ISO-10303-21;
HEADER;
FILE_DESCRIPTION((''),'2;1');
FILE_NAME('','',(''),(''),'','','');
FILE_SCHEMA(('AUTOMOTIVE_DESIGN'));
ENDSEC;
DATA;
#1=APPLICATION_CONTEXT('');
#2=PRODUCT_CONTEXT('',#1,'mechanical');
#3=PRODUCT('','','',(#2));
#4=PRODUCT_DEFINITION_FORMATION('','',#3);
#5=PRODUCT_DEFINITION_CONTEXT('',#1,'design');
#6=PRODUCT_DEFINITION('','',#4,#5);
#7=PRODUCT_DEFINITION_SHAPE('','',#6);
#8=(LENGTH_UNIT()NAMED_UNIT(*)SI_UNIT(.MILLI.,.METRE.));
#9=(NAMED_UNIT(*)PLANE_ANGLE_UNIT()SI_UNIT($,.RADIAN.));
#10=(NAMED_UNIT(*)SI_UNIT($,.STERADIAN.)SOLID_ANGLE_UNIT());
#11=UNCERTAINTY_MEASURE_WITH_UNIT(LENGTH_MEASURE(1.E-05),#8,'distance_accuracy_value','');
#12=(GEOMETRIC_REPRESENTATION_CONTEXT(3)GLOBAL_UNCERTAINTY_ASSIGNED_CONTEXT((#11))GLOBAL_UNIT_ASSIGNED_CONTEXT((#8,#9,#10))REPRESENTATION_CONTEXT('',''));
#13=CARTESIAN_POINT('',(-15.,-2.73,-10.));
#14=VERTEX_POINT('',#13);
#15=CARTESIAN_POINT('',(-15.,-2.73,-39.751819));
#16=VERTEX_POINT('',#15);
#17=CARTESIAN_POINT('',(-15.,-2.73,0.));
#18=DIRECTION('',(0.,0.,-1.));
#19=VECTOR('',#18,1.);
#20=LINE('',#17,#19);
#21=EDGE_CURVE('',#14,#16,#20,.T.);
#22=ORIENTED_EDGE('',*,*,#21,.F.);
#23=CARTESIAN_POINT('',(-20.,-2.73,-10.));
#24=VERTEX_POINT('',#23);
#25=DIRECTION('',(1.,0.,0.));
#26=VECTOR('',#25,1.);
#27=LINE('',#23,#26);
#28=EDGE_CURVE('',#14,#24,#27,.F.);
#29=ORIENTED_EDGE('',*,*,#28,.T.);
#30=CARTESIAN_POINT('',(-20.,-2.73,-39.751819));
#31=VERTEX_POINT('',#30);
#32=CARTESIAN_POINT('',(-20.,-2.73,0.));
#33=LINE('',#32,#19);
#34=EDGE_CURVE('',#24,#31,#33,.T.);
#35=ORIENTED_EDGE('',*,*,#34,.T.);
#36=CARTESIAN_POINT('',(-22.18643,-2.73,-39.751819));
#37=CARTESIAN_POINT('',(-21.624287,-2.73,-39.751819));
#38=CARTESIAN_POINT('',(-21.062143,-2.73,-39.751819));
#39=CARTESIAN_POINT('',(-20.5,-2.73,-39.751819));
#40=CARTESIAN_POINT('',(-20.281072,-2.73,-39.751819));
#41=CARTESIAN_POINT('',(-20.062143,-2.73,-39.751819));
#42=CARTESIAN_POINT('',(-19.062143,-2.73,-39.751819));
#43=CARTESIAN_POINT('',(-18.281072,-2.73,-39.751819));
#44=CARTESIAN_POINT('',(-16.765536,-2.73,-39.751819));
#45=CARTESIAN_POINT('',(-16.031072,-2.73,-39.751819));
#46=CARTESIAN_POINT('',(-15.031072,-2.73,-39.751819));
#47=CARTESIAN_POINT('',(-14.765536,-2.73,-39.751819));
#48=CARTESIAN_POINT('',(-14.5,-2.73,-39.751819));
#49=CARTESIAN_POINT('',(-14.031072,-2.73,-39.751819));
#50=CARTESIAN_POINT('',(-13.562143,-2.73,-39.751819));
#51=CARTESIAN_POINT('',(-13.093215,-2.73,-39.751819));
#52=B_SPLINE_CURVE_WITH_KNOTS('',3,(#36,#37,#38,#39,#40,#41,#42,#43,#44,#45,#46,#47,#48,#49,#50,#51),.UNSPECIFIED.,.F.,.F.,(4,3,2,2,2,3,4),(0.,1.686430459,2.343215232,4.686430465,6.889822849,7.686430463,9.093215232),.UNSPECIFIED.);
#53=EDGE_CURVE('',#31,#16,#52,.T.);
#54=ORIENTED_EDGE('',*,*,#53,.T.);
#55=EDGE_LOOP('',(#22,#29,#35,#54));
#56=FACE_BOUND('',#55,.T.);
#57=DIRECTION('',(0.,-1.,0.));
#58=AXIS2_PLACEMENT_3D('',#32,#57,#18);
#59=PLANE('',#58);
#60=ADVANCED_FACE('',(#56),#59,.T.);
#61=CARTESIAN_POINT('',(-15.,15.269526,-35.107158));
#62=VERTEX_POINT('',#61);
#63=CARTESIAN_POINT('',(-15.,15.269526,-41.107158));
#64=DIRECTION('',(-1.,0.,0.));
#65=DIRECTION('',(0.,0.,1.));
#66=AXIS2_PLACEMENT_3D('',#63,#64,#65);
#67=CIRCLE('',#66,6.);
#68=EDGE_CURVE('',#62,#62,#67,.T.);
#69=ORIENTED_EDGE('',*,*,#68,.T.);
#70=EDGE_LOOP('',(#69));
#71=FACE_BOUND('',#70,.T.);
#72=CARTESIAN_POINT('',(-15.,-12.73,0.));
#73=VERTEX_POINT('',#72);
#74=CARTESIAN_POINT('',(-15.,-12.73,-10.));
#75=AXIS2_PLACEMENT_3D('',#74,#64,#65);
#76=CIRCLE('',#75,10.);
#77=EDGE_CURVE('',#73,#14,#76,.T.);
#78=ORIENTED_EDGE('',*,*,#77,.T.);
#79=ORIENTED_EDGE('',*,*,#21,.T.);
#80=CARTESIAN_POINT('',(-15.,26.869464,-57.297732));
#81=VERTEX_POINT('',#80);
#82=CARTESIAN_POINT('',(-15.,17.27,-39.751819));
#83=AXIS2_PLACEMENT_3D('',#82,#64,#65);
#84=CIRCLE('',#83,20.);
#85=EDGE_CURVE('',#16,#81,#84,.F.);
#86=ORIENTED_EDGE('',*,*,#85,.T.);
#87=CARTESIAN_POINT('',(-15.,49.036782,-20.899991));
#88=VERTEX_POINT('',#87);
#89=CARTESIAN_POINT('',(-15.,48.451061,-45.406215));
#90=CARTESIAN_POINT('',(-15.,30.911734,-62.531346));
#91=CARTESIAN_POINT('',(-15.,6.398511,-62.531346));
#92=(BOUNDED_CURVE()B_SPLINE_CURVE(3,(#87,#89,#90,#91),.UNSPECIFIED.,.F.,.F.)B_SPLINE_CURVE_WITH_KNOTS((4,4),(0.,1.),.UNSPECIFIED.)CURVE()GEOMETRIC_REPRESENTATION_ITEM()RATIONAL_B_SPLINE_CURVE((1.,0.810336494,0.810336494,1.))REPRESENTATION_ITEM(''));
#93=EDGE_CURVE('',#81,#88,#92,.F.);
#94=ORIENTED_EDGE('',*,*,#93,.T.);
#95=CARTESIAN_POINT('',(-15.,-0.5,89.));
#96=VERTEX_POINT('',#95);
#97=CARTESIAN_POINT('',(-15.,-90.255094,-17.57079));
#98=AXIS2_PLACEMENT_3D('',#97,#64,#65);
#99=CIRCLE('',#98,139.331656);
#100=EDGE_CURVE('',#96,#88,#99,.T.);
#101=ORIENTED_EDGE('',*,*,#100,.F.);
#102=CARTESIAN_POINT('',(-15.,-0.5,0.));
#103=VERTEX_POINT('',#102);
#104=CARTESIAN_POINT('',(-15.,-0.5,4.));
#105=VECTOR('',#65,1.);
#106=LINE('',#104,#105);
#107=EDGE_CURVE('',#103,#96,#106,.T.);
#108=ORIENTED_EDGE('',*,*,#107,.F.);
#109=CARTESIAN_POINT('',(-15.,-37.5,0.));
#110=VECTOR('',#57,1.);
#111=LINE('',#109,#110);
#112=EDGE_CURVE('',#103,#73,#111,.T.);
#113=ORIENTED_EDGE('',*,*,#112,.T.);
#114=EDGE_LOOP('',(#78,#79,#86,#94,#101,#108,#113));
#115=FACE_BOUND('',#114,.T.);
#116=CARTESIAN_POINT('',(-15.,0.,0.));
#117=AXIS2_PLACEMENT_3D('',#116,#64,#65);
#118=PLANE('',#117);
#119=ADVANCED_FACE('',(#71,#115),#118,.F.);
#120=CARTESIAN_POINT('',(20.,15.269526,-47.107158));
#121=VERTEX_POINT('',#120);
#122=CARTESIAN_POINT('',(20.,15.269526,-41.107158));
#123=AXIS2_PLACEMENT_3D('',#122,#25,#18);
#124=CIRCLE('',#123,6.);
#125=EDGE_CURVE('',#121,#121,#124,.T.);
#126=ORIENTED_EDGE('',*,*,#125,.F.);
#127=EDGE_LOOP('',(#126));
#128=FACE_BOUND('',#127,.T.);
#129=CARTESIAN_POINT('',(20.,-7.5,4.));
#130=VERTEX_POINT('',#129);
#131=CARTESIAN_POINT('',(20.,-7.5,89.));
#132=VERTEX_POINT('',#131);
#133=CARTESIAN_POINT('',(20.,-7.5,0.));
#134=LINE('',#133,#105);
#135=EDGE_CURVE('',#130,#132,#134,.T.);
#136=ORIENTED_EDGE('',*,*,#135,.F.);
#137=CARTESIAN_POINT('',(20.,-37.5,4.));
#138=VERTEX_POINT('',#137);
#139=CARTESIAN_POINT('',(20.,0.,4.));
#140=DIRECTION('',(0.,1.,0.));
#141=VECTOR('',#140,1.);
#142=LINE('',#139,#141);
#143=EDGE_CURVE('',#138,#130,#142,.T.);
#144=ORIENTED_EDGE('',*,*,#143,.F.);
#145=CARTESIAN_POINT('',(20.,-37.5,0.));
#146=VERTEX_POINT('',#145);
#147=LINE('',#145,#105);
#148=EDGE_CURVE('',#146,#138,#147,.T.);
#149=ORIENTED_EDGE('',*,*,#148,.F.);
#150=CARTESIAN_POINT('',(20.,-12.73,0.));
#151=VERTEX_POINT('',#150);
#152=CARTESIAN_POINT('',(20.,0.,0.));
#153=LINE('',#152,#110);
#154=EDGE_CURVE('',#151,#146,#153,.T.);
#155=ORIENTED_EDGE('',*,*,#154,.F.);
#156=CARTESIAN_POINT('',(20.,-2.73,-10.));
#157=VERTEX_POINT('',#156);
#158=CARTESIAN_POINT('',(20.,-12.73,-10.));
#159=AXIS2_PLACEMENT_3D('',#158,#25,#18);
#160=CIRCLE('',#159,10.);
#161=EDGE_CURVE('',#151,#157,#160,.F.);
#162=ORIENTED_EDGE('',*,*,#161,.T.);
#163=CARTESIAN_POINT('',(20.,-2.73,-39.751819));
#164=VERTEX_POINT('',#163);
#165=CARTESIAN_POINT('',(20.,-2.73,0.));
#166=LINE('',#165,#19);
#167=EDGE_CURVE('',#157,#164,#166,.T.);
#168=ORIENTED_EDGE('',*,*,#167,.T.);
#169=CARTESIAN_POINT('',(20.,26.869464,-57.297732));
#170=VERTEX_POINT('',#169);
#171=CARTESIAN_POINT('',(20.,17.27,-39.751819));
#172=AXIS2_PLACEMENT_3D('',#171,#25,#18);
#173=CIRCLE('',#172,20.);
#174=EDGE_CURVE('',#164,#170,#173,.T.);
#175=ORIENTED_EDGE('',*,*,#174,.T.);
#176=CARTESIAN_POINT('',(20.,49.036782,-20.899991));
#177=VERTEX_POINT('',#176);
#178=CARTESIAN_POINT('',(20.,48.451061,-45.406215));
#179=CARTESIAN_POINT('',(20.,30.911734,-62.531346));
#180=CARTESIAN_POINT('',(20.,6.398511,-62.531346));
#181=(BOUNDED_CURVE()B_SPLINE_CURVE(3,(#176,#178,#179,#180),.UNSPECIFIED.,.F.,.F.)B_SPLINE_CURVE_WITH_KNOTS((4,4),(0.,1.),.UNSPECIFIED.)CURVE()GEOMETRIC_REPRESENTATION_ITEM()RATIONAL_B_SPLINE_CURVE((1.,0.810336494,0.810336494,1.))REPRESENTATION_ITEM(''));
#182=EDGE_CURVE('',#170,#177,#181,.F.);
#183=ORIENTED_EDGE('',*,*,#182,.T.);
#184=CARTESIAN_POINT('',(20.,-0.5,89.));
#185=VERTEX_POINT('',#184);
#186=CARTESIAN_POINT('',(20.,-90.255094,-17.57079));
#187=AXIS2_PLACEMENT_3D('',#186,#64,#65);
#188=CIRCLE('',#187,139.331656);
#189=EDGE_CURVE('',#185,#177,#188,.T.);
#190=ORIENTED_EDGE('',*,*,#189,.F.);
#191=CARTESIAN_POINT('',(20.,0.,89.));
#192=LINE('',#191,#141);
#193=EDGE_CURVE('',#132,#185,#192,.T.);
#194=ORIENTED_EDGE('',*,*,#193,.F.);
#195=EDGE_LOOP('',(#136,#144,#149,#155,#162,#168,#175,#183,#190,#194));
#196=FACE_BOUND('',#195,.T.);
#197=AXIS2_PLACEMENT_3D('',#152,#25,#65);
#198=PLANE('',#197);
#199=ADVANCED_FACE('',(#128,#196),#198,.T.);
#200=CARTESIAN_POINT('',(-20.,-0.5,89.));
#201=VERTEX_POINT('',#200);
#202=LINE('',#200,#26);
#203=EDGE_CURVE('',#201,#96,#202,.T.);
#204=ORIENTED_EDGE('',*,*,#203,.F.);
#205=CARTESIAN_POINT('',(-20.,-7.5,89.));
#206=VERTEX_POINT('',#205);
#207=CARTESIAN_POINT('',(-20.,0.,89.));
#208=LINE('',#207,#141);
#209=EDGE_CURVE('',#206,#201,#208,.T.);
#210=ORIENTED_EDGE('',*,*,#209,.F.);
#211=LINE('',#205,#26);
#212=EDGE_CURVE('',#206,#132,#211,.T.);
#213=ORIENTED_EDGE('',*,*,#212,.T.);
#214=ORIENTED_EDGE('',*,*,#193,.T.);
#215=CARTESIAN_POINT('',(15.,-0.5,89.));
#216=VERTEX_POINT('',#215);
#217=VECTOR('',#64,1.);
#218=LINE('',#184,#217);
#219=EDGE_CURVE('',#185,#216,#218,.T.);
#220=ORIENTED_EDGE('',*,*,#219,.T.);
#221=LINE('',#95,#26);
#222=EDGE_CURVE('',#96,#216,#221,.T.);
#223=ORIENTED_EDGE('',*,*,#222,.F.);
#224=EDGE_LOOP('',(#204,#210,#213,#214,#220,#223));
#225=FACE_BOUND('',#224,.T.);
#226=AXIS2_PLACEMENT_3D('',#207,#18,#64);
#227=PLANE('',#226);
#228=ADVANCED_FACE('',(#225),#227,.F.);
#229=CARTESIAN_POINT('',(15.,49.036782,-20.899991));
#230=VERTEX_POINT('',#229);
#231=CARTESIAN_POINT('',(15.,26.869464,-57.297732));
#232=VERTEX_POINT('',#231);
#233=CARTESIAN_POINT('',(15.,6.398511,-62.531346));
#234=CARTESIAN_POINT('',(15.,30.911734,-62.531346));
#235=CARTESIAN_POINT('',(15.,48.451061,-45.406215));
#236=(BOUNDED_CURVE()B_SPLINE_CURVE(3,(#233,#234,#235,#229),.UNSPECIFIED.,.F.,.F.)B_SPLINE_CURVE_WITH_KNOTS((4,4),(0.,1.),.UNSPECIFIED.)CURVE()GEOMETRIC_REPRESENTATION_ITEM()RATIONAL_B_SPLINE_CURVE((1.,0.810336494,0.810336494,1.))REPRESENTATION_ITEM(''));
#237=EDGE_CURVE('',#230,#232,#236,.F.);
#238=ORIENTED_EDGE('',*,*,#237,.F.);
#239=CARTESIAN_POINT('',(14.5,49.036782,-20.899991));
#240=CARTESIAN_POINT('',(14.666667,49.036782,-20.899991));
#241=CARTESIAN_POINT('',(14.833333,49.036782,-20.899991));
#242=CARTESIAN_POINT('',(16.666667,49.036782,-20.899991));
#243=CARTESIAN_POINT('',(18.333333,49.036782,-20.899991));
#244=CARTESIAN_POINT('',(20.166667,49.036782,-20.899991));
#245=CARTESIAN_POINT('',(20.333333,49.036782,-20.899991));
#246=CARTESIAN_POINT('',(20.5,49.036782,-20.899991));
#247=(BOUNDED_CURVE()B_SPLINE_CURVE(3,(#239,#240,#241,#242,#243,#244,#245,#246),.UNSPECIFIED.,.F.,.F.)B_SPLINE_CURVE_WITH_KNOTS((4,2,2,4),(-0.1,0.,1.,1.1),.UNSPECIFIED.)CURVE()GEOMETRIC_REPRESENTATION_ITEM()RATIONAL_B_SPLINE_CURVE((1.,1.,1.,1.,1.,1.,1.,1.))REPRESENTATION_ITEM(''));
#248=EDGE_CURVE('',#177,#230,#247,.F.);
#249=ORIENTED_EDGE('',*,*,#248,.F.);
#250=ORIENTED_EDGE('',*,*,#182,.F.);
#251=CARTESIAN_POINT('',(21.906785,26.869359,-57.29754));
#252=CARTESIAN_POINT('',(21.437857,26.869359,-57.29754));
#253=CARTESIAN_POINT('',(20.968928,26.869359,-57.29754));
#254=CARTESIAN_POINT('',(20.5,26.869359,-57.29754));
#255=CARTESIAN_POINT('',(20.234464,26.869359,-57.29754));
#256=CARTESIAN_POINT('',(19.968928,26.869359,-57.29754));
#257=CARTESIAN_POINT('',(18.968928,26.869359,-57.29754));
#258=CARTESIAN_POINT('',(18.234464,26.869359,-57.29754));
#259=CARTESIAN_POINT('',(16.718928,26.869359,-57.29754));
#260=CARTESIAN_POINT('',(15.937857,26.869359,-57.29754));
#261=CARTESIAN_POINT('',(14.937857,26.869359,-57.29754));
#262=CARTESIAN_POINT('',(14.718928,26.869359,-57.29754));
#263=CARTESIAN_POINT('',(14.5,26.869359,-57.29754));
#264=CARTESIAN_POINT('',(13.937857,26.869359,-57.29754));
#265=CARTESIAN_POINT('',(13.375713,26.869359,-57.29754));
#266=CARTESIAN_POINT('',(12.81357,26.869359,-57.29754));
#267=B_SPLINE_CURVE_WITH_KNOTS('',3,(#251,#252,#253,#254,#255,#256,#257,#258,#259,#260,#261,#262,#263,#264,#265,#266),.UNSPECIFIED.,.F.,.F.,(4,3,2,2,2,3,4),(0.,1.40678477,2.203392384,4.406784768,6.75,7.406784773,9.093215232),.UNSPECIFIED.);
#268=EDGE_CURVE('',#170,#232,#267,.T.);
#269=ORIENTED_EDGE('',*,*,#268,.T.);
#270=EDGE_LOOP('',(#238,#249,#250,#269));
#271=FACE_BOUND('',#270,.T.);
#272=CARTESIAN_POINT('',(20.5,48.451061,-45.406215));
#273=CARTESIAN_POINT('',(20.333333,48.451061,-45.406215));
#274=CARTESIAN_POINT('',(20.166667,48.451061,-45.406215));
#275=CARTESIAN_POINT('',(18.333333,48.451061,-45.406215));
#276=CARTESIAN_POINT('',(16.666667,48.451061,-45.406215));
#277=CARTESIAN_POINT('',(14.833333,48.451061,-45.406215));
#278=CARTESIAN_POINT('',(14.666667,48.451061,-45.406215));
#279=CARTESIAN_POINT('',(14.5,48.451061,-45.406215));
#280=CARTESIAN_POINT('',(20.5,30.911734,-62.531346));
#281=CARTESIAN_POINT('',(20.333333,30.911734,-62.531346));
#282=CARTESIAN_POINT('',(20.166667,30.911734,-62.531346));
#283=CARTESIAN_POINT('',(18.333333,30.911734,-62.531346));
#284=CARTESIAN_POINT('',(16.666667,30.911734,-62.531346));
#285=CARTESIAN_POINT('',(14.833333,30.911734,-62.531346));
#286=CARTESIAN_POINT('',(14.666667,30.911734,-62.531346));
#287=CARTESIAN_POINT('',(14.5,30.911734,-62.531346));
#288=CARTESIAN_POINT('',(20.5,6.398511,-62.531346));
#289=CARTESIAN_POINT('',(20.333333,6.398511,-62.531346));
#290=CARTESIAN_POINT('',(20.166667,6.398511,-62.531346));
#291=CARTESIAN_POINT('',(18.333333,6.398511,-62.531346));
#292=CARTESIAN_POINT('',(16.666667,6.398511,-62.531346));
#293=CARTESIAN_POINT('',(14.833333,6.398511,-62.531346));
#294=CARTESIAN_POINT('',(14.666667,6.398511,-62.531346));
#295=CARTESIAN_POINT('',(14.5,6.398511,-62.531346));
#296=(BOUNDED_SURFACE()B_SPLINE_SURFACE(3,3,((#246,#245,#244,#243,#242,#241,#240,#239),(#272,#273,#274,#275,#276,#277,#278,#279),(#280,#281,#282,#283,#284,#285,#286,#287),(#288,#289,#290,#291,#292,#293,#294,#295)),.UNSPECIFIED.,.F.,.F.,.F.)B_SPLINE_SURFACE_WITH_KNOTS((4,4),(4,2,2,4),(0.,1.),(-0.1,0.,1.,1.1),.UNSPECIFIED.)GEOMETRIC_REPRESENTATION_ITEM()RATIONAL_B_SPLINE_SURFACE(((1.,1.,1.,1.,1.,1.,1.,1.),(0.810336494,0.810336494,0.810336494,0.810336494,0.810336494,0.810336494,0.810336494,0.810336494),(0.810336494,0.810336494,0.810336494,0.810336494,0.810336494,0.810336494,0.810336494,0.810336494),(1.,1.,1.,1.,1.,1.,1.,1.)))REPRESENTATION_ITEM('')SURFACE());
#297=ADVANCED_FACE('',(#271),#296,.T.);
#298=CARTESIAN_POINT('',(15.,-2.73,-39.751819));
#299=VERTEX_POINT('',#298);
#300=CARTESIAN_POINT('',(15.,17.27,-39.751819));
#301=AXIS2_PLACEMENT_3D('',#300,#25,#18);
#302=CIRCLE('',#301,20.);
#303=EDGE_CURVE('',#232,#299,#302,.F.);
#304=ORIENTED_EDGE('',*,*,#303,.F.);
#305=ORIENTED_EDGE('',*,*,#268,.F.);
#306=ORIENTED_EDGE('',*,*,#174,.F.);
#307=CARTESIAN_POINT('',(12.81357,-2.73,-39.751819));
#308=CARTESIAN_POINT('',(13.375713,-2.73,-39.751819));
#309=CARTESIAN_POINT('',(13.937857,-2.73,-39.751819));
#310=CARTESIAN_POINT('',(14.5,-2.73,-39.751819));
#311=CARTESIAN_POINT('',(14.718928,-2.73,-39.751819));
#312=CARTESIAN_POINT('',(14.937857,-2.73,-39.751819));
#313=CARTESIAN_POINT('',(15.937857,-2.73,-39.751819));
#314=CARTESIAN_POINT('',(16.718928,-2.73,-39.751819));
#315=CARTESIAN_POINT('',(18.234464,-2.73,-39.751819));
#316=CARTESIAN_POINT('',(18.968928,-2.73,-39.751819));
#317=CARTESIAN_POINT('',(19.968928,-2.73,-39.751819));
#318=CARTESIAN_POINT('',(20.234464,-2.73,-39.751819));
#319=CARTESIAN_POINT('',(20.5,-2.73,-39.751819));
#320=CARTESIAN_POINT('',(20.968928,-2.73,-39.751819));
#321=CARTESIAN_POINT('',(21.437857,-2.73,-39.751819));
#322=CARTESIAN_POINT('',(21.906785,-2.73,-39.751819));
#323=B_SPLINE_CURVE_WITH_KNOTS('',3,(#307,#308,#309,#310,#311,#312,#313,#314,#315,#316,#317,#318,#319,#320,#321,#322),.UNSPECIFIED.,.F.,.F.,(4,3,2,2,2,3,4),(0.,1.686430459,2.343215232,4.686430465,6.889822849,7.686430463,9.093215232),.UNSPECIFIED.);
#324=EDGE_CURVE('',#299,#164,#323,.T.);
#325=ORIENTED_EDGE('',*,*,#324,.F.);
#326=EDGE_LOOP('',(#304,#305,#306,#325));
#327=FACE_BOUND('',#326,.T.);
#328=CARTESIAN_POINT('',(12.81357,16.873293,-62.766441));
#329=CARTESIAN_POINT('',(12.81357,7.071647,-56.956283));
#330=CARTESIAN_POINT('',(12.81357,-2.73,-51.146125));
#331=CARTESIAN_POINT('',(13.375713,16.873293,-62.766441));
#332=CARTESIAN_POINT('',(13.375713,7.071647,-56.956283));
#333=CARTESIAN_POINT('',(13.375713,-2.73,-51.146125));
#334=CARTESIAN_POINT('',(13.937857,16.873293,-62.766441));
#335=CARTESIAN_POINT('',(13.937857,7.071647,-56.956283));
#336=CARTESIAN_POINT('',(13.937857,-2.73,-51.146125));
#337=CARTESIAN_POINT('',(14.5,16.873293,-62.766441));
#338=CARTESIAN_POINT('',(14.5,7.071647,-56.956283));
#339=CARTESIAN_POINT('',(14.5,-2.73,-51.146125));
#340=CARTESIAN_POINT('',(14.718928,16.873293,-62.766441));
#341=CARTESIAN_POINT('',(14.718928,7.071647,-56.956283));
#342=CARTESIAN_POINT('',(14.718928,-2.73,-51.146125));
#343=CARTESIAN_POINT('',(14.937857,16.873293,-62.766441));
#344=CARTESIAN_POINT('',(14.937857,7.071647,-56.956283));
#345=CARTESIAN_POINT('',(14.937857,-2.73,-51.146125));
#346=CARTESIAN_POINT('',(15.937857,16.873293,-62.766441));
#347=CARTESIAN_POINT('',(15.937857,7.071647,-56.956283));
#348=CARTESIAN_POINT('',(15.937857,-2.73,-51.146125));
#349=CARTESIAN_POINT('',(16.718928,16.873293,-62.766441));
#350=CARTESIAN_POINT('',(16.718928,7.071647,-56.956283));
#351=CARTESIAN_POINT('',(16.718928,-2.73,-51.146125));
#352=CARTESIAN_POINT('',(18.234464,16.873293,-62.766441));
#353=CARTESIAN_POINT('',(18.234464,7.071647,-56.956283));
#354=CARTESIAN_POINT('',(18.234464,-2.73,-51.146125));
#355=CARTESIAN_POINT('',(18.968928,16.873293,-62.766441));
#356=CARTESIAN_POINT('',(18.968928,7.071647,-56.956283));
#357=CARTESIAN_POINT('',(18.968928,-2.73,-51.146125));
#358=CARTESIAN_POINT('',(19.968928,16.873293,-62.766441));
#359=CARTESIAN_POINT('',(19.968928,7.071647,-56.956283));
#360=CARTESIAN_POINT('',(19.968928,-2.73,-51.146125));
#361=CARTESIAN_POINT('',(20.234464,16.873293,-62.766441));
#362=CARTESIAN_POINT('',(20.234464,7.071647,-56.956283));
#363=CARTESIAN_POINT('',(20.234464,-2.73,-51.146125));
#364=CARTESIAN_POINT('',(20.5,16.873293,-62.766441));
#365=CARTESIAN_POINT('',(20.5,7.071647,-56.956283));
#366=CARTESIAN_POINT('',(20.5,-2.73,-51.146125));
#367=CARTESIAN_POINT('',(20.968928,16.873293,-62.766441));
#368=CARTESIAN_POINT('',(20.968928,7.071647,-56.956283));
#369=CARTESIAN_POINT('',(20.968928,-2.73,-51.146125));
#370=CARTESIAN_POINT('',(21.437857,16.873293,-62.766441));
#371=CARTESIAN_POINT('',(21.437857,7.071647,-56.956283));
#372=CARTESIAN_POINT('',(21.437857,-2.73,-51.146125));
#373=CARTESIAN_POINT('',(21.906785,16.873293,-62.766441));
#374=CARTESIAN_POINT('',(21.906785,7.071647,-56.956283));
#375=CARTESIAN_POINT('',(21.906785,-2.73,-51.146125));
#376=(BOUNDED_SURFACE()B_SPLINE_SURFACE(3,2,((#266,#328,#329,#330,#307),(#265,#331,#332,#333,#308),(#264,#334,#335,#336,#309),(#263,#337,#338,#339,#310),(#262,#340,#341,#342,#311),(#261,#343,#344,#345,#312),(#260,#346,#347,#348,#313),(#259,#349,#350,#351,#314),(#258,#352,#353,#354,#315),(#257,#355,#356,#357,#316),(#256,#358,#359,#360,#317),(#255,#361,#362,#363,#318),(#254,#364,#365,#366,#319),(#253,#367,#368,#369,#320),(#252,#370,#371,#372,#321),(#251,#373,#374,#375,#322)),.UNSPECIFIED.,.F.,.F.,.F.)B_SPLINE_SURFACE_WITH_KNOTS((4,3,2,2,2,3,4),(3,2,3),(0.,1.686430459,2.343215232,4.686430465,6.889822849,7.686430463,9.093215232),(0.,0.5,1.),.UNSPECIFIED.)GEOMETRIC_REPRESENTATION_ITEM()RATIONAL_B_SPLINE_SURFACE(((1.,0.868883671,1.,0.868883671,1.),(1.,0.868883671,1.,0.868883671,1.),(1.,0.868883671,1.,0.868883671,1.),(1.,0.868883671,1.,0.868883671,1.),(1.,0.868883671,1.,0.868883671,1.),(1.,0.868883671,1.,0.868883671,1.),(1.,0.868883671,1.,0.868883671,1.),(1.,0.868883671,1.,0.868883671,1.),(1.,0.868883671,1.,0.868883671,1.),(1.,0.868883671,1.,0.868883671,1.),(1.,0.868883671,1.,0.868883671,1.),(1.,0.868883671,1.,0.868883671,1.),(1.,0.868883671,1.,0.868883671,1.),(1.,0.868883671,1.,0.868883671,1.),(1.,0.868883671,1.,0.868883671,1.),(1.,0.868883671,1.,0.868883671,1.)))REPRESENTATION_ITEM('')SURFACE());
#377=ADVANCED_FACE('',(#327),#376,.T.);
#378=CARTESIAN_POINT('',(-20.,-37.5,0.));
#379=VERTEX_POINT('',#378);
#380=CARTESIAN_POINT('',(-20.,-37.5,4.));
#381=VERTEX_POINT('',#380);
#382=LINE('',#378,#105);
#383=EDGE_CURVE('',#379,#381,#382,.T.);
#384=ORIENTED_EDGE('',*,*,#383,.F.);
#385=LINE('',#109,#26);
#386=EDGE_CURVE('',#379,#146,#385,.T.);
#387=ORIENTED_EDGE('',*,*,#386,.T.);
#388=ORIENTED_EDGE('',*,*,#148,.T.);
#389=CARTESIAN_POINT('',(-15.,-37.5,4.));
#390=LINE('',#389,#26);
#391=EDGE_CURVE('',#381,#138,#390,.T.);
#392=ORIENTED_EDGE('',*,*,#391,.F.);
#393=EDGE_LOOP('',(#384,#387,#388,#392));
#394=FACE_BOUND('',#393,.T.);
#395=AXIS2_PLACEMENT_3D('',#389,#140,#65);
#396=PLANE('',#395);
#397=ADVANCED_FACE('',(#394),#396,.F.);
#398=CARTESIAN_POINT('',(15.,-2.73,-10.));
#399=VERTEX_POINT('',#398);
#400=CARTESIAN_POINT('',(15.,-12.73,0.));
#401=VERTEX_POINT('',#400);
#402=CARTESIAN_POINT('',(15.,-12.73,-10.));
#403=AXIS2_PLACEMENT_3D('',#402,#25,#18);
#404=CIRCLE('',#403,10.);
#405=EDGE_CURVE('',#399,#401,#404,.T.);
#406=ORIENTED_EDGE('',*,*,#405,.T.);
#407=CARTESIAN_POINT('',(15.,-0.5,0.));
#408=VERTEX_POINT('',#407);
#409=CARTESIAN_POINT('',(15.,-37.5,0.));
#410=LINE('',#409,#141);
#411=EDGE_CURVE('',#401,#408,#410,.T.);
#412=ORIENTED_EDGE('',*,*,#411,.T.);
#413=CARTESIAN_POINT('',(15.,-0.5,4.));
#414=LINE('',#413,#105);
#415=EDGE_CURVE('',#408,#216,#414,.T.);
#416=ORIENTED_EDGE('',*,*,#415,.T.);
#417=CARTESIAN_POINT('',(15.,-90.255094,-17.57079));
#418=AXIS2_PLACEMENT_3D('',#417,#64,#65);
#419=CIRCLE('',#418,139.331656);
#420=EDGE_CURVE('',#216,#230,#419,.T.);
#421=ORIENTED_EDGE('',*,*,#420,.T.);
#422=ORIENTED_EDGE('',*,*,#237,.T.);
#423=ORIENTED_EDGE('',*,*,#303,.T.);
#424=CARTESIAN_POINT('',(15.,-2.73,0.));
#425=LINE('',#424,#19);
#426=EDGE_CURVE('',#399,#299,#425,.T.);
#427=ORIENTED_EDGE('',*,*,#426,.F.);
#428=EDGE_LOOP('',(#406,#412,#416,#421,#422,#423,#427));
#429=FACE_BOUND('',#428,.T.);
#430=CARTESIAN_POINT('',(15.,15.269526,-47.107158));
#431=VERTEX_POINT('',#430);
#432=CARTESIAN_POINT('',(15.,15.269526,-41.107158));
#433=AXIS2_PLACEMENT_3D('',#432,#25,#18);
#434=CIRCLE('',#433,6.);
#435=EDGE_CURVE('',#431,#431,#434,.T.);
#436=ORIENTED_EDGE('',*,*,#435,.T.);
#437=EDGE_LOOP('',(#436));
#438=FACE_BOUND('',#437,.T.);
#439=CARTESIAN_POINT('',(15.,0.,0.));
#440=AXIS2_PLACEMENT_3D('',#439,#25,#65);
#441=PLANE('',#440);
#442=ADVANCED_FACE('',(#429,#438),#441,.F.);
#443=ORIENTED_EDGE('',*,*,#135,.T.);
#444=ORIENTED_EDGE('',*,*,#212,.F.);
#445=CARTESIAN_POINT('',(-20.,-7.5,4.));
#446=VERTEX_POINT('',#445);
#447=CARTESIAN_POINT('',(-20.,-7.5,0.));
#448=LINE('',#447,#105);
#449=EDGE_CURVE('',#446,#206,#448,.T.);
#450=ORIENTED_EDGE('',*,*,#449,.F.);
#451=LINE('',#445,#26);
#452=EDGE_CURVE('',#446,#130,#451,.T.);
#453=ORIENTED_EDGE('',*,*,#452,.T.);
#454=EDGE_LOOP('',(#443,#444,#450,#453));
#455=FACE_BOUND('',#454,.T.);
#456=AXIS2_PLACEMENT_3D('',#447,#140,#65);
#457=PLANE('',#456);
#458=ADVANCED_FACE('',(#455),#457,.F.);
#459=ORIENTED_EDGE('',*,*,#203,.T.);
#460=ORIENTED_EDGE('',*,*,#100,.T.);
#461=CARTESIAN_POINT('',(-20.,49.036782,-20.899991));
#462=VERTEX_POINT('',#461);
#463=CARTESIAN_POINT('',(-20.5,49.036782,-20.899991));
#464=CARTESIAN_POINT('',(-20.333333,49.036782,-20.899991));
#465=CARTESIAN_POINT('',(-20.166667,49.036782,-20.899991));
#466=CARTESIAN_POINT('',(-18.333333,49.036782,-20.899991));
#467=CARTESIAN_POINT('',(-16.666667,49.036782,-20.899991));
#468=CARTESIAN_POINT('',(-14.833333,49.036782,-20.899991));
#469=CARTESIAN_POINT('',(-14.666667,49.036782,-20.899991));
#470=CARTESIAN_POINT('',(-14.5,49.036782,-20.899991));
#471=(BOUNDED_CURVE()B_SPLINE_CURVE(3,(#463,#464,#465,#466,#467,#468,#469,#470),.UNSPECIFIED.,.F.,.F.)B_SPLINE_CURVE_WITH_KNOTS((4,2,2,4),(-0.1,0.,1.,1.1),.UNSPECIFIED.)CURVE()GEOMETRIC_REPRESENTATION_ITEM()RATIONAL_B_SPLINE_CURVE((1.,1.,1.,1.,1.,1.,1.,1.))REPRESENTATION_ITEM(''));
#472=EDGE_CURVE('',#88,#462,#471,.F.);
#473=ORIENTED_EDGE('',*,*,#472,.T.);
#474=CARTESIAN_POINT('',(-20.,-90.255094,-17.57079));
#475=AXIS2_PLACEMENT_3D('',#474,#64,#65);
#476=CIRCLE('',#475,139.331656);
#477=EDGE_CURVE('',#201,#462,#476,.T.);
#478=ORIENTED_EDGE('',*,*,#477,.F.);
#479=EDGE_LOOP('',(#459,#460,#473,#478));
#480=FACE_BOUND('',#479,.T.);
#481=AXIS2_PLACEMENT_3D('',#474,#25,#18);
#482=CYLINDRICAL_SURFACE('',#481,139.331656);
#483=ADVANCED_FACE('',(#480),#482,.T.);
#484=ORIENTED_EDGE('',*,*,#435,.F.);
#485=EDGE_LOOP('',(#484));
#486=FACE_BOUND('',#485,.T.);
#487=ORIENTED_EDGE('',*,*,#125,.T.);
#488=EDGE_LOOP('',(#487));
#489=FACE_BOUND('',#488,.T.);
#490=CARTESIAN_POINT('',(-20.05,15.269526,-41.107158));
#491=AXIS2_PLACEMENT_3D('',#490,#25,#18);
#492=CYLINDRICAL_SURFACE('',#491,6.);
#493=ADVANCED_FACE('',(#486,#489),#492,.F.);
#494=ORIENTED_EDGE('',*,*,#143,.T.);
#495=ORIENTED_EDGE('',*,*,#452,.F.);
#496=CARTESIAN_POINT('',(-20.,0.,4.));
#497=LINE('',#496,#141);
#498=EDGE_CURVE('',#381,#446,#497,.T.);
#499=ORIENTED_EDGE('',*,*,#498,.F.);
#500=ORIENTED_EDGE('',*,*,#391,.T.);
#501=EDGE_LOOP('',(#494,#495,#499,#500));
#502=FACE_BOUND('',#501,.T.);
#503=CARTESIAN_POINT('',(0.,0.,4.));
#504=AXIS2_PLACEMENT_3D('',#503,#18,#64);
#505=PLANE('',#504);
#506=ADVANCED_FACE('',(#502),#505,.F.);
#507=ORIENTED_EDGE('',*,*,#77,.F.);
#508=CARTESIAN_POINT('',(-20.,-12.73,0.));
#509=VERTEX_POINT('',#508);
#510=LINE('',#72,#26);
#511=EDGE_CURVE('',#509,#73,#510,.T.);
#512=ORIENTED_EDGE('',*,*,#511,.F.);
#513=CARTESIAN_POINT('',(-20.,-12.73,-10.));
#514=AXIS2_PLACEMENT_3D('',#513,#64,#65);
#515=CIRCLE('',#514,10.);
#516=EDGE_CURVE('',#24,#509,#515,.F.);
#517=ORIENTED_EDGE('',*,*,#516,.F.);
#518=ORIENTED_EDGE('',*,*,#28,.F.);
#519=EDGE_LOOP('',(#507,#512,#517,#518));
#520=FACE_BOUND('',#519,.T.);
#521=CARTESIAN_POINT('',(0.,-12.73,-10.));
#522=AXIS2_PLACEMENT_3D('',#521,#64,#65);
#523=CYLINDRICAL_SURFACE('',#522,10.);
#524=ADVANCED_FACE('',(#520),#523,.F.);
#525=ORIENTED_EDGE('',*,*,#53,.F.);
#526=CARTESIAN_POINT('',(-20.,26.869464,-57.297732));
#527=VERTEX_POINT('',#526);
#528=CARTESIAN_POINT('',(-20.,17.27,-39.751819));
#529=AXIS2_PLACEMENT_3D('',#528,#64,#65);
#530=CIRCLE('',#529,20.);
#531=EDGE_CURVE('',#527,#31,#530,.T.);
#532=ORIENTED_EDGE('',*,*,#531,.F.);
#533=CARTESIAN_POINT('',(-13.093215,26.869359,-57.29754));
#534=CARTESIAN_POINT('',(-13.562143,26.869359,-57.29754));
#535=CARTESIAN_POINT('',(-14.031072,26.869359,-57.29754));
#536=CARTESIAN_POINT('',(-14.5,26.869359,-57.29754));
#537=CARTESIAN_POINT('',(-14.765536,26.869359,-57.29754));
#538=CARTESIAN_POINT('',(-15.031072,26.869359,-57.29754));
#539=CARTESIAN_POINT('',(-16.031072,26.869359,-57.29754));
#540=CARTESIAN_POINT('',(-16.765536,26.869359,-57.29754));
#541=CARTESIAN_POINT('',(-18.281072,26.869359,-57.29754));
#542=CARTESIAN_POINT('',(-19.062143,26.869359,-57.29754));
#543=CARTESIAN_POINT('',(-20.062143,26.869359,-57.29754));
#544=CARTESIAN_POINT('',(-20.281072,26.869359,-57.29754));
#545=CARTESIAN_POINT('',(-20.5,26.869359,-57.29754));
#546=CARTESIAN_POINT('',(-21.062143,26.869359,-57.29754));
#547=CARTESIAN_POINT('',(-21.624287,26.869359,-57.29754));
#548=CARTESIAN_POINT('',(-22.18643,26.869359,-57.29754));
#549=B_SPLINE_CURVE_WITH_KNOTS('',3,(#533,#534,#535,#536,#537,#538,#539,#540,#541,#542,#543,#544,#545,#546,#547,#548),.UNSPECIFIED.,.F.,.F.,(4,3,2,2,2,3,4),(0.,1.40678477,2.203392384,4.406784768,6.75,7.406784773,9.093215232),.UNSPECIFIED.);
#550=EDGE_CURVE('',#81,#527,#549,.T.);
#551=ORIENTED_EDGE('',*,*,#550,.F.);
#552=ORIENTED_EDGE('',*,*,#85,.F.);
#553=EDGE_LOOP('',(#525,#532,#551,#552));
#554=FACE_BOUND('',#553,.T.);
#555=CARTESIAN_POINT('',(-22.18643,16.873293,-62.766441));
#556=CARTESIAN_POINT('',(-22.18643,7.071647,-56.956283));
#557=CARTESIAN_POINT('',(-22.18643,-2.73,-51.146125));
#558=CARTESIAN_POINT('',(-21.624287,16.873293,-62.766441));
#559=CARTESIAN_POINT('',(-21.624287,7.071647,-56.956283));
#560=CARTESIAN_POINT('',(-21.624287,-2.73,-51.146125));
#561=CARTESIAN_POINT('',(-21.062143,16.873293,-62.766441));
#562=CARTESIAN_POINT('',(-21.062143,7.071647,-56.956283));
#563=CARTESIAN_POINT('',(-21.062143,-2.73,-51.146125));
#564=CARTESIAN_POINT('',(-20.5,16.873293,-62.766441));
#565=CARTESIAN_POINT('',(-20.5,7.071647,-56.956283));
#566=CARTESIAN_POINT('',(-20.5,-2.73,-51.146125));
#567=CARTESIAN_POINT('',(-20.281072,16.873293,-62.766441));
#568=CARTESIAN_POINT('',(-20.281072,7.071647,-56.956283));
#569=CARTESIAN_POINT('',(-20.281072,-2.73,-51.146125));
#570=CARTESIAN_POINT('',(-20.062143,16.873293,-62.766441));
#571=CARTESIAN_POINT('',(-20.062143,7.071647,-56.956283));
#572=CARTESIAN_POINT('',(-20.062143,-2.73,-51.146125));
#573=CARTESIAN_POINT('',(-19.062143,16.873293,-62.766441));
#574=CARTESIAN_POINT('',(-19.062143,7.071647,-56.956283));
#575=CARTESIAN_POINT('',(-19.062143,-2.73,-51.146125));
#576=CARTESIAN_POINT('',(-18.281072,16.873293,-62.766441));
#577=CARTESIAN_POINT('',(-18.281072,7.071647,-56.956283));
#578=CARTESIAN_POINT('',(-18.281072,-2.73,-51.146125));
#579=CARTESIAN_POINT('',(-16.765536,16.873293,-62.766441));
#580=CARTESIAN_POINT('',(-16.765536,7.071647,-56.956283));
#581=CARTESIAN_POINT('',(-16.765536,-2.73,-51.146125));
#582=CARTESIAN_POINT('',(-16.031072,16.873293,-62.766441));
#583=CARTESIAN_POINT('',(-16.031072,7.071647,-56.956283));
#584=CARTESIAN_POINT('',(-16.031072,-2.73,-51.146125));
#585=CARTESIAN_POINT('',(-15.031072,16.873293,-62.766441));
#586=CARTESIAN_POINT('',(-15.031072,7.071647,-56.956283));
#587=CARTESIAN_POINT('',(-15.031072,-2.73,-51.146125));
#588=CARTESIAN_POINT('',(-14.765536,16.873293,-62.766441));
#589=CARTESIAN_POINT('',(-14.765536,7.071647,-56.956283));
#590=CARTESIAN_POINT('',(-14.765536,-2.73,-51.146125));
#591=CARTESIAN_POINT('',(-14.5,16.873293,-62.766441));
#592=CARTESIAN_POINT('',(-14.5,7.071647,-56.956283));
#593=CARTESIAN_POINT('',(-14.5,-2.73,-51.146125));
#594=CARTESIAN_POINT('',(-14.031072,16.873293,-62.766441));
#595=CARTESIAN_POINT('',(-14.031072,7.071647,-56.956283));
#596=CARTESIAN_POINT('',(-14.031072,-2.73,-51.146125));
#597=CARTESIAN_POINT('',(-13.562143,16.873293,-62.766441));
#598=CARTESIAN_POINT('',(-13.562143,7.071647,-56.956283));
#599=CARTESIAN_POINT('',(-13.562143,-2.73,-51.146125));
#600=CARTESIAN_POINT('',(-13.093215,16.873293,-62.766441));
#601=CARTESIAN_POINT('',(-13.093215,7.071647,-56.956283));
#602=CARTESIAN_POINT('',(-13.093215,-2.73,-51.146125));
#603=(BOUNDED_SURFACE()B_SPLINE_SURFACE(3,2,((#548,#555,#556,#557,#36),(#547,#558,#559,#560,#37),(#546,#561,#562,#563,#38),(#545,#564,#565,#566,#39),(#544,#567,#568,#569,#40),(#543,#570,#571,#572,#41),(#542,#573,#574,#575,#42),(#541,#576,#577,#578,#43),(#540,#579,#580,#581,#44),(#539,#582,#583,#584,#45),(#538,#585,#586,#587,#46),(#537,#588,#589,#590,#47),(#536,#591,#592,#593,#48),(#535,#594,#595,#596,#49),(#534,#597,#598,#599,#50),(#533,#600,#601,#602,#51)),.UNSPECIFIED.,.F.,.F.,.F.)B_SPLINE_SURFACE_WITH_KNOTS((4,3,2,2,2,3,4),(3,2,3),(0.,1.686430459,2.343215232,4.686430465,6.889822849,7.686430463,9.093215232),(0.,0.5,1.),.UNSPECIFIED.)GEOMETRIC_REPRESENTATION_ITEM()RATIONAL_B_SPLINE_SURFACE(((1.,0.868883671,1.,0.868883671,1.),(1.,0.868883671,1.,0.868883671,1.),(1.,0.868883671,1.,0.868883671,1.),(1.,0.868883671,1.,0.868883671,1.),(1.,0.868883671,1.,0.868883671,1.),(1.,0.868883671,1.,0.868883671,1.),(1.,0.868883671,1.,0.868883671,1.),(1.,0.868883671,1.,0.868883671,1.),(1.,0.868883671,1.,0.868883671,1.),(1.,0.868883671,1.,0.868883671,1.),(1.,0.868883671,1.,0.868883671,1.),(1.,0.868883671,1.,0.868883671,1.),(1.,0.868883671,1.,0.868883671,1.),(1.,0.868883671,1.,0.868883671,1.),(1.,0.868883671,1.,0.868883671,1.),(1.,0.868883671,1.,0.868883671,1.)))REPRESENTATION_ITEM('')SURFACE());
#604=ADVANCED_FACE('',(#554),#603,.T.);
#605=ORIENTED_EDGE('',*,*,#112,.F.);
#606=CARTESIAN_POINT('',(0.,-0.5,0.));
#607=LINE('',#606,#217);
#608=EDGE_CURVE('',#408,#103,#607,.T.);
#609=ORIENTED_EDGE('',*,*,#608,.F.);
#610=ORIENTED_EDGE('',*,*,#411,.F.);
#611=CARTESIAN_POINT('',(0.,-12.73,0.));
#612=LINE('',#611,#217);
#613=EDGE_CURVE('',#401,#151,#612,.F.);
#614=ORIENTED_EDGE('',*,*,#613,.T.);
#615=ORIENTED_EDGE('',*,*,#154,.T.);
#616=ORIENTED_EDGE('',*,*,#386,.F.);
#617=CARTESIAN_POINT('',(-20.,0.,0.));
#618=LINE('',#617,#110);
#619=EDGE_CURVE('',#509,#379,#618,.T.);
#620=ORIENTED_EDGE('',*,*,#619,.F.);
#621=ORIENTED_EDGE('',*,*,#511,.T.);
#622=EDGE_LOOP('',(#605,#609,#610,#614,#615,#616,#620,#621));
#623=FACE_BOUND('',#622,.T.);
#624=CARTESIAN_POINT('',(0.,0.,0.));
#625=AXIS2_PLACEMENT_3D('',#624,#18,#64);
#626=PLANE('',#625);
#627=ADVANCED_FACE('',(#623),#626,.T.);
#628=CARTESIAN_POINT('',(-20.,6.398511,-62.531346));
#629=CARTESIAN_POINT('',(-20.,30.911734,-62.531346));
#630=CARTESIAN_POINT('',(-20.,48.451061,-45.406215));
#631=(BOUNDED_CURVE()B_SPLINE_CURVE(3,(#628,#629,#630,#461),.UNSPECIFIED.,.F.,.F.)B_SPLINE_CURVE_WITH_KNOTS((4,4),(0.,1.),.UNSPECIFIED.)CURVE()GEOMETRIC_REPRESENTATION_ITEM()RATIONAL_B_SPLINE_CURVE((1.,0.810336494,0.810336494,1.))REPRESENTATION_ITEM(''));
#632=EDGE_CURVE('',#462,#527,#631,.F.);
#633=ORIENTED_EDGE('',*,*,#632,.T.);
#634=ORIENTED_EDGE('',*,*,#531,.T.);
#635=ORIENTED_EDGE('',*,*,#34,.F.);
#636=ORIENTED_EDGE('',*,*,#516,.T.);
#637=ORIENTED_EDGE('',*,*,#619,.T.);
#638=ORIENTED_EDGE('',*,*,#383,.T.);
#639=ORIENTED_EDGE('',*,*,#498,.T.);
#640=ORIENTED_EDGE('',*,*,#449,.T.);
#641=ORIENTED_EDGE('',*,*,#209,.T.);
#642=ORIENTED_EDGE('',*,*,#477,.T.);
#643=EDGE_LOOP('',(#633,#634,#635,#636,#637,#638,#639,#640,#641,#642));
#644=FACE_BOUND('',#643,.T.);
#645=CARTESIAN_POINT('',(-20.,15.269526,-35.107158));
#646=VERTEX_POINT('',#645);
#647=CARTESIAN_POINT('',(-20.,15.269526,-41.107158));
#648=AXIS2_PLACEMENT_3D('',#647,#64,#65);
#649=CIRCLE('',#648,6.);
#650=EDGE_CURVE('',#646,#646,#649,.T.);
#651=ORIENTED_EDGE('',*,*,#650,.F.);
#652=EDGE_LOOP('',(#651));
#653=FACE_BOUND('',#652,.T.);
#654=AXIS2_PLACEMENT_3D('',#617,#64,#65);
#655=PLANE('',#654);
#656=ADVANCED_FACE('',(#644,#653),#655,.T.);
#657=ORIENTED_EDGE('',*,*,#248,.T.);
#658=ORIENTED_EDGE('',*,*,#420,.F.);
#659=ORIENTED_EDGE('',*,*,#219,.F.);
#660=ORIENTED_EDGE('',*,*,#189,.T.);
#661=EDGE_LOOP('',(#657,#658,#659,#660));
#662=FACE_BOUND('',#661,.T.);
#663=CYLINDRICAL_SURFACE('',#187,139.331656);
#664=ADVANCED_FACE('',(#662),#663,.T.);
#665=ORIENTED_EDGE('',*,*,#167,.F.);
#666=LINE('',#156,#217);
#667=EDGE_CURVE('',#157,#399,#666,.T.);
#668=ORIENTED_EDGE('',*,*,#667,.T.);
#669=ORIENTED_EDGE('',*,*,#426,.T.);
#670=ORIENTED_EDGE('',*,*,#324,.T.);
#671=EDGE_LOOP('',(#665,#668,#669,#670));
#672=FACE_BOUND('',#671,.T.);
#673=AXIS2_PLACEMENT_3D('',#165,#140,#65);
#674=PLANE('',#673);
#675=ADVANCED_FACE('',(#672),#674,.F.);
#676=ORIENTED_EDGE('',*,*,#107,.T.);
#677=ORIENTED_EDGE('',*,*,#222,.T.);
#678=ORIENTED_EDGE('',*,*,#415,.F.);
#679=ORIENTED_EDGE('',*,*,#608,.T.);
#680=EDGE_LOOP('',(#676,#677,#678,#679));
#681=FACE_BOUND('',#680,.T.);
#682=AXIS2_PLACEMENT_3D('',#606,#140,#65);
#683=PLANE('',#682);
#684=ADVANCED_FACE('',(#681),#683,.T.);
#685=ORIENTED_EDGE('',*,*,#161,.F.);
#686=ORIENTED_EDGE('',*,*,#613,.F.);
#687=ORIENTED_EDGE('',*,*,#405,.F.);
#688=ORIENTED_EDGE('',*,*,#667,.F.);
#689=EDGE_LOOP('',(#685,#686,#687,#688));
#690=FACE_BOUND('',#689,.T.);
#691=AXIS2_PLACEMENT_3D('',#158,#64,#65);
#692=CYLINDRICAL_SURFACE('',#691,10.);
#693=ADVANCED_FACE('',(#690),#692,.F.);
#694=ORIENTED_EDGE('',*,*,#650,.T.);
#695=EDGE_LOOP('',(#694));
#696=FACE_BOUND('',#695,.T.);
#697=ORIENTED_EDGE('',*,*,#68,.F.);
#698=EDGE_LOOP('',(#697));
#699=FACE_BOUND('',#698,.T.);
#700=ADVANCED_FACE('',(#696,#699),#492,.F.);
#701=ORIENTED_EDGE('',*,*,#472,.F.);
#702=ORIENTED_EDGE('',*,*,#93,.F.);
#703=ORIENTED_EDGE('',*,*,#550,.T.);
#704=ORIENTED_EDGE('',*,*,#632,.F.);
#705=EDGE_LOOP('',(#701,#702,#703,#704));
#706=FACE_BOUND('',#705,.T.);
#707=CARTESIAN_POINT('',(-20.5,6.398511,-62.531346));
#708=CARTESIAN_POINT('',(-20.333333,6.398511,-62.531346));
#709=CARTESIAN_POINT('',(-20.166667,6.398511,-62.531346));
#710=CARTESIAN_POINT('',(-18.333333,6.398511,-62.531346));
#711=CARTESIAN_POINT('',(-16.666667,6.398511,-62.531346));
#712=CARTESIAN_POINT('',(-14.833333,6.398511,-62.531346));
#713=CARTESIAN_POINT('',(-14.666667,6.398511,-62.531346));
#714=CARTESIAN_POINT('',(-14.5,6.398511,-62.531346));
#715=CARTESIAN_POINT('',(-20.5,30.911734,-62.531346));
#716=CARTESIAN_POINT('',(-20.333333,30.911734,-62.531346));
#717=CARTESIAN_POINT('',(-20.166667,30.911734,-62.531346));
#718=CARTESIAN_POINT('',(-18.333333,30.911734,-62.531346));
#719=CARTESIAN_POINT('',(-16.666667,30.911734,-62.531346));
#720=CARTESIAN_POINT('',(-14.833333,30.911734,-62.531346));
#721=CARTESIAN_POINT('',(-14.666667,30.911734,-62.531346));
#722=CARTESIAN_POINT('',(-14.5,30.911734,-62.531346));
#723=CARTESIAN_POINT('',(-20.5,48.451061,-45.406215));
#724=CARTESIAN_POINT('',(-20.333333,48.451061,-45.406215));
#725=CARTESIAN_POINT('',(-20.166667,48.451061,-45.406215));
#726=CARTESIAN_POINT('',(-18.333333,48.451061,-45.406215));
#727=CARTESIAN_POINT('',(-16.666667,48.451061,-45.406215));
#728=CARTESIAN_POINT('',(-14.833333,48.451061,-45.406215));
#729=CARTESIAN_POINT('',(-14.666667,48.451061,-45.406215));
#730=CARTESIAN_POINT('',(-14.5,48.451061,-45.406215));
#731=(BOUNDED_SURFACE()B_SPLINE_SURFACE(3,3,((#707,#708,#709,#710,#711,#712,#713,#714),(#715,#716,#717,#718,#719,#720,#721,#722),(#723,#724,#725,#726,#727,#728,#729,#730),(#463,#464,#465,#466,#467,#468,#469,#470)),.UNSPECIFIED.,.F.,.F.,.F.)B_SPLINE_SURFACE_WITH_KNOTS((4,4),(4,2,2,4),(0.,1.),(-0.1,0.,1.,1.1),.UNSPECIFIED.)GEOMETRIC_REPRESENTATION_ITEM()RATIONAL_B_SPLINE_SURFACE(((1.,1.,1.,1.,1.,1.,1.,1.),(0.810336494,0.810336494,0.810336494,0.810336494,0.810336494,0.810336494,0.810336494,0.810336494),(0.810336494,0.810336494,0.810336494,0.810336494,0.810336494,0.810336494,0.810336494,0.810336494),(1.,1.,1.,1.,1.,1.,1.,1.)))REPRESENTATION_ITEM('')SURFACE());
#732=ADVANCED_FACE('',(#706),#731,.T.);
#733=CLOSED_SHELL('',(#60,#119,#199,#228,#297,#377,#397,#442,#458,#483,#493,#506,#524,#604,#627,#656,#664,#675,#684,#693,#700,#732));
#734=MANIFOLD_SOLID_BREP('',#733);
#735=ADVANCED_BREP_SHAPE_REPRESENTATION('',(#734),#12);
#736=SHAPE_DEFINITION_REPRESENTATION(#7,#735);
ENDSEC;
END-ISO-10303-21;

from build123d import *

# Parameters (mm, degrees)
SZKIC1_W                        = 30
SZKIC1_H                        = 75
DODANIE_WYCI_GNI_CIE1_DEPTH     = 4
DODANIE_WYCI_GNI_CIE9_DEPTH     = 5
ZAOKR_GLENIE4_START             = -20
ZAOKR_GLENIE4_DEPTH             = 6
ZAOKR_GLENIE7_START             = 14
ZAOKR_GLENIE7_DEPTH             = 6
SZKIC12_W                       = 30
SZKIC12_H                       = 85
DODANIE_WYCI_GNI_CIE14_DEPTH    = 7
SZKIC13_W                       = 30
SZKIC13_H                       = 38
WYTNIJ_WYCI_GNI_CIE3_DEPTH      = 10
ZAOKR_GLENIE10_R                = 20
WYTNIJ_WYCI_GNI_CIE4_DEPTH      = 108.491901733
WYTNIJ_WYCI_GNI_CIE4_DEPTH_BACK = 108.491901733
SZKIC16_R                       = 6
ZAOKR_GLENIE11_R                = 10


with BuildPart() as part:
    # Szkic1 → Dodanie-wyciągnięcie1 (new body)
    with BuildSketch(Plane.XY):
        Rectangle(SZKIC1_W, SZKIC1_H)
    extrude(amount=DODANIE_WYCI_GNI_CIE1_DEPTH)

    # Szkic2<6> → Dodanie-wyciągnięcie9 (add)
    with BuildSketch(Plane.ZY.offset(15)):
        with BuildLine():
            Line((-62.531345503, -2.73), (0, -2.73))
            Line((0, -2.73), (0, -37.5))
            Line((0, -37.5), (4, -37.5))
            Line((4, -37.5), (4, -7.5))
            Line((4, -7.5), (89, -7.5))
            Line((89, -7.5), (89, -0.5))
            ThreePointArc((89, -0.5), (36.533874177, 38.142707909), (-27.765672752, 48.703081871))
            Line((-27.765672752, 48.703081871), (-62.531345503, 37.27))
            Line((-62.531345503, 37.27), (-62.531345503, -2.73))
        make_face()
    dodanie_wyci_gni_cie9 = extrude(amount=DODANIE_WYCI_GNI_CIE9_DEPTH)

    # Zaokrąglenie4: read off the stored shape, not the designer's step
    # Zaokrąglenie4 outline → Zaokrąglenie4 (cut)
    with BuildSketch(Plane.YZ.offset(ZAOKR_GLENIE4_START)):
        with BuildLine():
            add(Edge.make_bspline(
                [(46.914284354, -33.205041576), (48.244794, -29.159256091), (48.938225425, -25.023538595), (49.036781903, -20.899990656)],
                knots=[0.800219325, 0.800219325, 0.800219325, 0.800219325, 1, 1, 1, 1], degree=3, weights=[0.909036421, 0.931787704, 0.962108897, 1]))
            Line((46.914284354, -33.205041576), (48.703081871, -27.765672752))
            ThreePointArc((48.703081871, -27.765672752), (48.912277268, -24.334889862), (49.036781903, -20.899990656))
        make_face()
        with BuildLine():
            add(Edge.make_bspline(
                [(6.398511186, -62.531345503), (25.138203193, -62.531345503), (40.842910838, -51.666745261), (46.914284354, -33.205041576)],
                knots=[0, 0, 0, 0, 0.800219325, 0.800219325, 0.800219325, 0.800219325], degree=3, weights=[1, 0.848227597, 0.817906404, 0.909036421]))
            Line((6.398511186, -62.531345503), (37.27, -62.531345503))
            Line((37.27, -62.531345503), (46.914284354, -33.205041576))
        make_face()
    extrude(amount=ZAOKR_GLENIE4_DEPTH, mode=Mode.SUBTRACT)

    # Lustro2: Dodanie-wyciągnięcie9 across plane
    add(dodanie_wyci_gni_cie9.mirror(Plane(origin=(0, 0, 0), x_dir=(0, 0, 1), z_dir=(1, 0, 0))))

    # Zaokrąglenie7: read off the stored shape, not the designer's step
    # Zaokrąglenie7 outline → Zaokrąglenie7 (cut)
    with BuildSketch(Plane.YZ.offset(ZAOKR_GLENIE7_START)):
        with BuildLine():
            ThreePointArc((48.703081871, -27.765672752), (48.912277268, -24.334889862), (49.036781903, -20.899990656))
            add(Edge.make_bspline(
                [(49.036781903, -20.899990656), (48.938225459, -25.023537174), (48.244794476, -29.159253258), (46.914285711, -33.205037449)],
                knots=[0, 0, 0, 0, 0.199780609, 0.199780609, 0.199780609, 0.199780609], degree=3, weights=[1, 0.962108909, 0.931787724, 0.909036443]))
            Line((46.914285711, -33.205037449), (48.703081871, -27.765672752))
        make_face()
        with BuildLine():
            Line((37.27, -62.531345503), (46.914285711, -33.205037449))
            add(Edge.make_bspline(
                [(46.914285711, -33.205037449), (40.842913536, -51.666743395), (25.138205022, -62.531345503), (6.398511186, -62.531345503)],
                knots=[0.199780609, 0.199780609, 0.199780609, 0.199780609, 1, 1, 1, 1], degree=3, weights=[0.909036443, 0.817906399, 0.848227585, 1]))
            Line((6.398511186, -62.531345503), (37.27, -62.531345503))
        make_face()
    extrude(amount=ZAOKR_GLENIE7_DEPTH, mode=Mode.SUBTRACT)

    # Szkic12 → Dodanie-wyciągnięcie14 (add)
    with BuildSketch(Plane.XZ.offset(7.5)):
        with Locations((0, 46.5)):
            Rectangle(SZKIC12_W, SZKIC12_H)
    extrude(amount=-DODANIE_WYCI_GNI_CIE14_DEPTH)

    # Szkic13 → Wytnij-wyciągnięcie3 (cut)
    with BuildSketch(Plane.XY.offset(4)):
        with Locations((0, 18.5)):
            Rectangle(SZKIC13_W, SZKIC13_H)
    extrude(amount=-WYTNIJ_WYCI_GNI_CIE3_DEPTH, mode=Mode.SUBTRACT)

    # Zaokrąglenie10
    zaokr_glenie10_edges = [part.edges().sort_by_distance(p)[0] for p in [
        (17.5, -2.73, -62.531345503),
        (-17.5, -2.73, -62.531345503),
    ]]
    fillet(zaokr_glenie10_edges, radius=ZAOKR_GLENIE10_R)

    # Szkic16 → Wytnij-wyciągnięcie4 (cut, two sides: drawn at the far end of the back side and taken through both)
    with BuildSketch(Plane(origin=(-15, 0, 0), x_dir=(0, 0, -1), z_dir=(1, 0, 0)).offset(-WYTNIJ_WYCI_GNI_CIE4_DEPTH_BACK)):
        with Locations((41.107158155, 15.269526453)):
            Circle(SZKIC16_R)
    extrude(amount=WYTNIJ_WYCI_GNI_CIE4_DEPTH + WYTNIJ_WYCI_GNI_CIE4_DEPTH_BACK, mode=Mode.SUBTRACT)

    # Zaokrąglenie11
    zaokr_glenie11_edges = [part.edges().sort_by_distance(p)[0] for p in [
        (-17.5, -2.73, 0),
        (17.5, -2.73, 0),
    ]]
    fillet(zaokr_glenie11_edges, radius=ZAOKR_GLENIE11_R)


solid = part.part
